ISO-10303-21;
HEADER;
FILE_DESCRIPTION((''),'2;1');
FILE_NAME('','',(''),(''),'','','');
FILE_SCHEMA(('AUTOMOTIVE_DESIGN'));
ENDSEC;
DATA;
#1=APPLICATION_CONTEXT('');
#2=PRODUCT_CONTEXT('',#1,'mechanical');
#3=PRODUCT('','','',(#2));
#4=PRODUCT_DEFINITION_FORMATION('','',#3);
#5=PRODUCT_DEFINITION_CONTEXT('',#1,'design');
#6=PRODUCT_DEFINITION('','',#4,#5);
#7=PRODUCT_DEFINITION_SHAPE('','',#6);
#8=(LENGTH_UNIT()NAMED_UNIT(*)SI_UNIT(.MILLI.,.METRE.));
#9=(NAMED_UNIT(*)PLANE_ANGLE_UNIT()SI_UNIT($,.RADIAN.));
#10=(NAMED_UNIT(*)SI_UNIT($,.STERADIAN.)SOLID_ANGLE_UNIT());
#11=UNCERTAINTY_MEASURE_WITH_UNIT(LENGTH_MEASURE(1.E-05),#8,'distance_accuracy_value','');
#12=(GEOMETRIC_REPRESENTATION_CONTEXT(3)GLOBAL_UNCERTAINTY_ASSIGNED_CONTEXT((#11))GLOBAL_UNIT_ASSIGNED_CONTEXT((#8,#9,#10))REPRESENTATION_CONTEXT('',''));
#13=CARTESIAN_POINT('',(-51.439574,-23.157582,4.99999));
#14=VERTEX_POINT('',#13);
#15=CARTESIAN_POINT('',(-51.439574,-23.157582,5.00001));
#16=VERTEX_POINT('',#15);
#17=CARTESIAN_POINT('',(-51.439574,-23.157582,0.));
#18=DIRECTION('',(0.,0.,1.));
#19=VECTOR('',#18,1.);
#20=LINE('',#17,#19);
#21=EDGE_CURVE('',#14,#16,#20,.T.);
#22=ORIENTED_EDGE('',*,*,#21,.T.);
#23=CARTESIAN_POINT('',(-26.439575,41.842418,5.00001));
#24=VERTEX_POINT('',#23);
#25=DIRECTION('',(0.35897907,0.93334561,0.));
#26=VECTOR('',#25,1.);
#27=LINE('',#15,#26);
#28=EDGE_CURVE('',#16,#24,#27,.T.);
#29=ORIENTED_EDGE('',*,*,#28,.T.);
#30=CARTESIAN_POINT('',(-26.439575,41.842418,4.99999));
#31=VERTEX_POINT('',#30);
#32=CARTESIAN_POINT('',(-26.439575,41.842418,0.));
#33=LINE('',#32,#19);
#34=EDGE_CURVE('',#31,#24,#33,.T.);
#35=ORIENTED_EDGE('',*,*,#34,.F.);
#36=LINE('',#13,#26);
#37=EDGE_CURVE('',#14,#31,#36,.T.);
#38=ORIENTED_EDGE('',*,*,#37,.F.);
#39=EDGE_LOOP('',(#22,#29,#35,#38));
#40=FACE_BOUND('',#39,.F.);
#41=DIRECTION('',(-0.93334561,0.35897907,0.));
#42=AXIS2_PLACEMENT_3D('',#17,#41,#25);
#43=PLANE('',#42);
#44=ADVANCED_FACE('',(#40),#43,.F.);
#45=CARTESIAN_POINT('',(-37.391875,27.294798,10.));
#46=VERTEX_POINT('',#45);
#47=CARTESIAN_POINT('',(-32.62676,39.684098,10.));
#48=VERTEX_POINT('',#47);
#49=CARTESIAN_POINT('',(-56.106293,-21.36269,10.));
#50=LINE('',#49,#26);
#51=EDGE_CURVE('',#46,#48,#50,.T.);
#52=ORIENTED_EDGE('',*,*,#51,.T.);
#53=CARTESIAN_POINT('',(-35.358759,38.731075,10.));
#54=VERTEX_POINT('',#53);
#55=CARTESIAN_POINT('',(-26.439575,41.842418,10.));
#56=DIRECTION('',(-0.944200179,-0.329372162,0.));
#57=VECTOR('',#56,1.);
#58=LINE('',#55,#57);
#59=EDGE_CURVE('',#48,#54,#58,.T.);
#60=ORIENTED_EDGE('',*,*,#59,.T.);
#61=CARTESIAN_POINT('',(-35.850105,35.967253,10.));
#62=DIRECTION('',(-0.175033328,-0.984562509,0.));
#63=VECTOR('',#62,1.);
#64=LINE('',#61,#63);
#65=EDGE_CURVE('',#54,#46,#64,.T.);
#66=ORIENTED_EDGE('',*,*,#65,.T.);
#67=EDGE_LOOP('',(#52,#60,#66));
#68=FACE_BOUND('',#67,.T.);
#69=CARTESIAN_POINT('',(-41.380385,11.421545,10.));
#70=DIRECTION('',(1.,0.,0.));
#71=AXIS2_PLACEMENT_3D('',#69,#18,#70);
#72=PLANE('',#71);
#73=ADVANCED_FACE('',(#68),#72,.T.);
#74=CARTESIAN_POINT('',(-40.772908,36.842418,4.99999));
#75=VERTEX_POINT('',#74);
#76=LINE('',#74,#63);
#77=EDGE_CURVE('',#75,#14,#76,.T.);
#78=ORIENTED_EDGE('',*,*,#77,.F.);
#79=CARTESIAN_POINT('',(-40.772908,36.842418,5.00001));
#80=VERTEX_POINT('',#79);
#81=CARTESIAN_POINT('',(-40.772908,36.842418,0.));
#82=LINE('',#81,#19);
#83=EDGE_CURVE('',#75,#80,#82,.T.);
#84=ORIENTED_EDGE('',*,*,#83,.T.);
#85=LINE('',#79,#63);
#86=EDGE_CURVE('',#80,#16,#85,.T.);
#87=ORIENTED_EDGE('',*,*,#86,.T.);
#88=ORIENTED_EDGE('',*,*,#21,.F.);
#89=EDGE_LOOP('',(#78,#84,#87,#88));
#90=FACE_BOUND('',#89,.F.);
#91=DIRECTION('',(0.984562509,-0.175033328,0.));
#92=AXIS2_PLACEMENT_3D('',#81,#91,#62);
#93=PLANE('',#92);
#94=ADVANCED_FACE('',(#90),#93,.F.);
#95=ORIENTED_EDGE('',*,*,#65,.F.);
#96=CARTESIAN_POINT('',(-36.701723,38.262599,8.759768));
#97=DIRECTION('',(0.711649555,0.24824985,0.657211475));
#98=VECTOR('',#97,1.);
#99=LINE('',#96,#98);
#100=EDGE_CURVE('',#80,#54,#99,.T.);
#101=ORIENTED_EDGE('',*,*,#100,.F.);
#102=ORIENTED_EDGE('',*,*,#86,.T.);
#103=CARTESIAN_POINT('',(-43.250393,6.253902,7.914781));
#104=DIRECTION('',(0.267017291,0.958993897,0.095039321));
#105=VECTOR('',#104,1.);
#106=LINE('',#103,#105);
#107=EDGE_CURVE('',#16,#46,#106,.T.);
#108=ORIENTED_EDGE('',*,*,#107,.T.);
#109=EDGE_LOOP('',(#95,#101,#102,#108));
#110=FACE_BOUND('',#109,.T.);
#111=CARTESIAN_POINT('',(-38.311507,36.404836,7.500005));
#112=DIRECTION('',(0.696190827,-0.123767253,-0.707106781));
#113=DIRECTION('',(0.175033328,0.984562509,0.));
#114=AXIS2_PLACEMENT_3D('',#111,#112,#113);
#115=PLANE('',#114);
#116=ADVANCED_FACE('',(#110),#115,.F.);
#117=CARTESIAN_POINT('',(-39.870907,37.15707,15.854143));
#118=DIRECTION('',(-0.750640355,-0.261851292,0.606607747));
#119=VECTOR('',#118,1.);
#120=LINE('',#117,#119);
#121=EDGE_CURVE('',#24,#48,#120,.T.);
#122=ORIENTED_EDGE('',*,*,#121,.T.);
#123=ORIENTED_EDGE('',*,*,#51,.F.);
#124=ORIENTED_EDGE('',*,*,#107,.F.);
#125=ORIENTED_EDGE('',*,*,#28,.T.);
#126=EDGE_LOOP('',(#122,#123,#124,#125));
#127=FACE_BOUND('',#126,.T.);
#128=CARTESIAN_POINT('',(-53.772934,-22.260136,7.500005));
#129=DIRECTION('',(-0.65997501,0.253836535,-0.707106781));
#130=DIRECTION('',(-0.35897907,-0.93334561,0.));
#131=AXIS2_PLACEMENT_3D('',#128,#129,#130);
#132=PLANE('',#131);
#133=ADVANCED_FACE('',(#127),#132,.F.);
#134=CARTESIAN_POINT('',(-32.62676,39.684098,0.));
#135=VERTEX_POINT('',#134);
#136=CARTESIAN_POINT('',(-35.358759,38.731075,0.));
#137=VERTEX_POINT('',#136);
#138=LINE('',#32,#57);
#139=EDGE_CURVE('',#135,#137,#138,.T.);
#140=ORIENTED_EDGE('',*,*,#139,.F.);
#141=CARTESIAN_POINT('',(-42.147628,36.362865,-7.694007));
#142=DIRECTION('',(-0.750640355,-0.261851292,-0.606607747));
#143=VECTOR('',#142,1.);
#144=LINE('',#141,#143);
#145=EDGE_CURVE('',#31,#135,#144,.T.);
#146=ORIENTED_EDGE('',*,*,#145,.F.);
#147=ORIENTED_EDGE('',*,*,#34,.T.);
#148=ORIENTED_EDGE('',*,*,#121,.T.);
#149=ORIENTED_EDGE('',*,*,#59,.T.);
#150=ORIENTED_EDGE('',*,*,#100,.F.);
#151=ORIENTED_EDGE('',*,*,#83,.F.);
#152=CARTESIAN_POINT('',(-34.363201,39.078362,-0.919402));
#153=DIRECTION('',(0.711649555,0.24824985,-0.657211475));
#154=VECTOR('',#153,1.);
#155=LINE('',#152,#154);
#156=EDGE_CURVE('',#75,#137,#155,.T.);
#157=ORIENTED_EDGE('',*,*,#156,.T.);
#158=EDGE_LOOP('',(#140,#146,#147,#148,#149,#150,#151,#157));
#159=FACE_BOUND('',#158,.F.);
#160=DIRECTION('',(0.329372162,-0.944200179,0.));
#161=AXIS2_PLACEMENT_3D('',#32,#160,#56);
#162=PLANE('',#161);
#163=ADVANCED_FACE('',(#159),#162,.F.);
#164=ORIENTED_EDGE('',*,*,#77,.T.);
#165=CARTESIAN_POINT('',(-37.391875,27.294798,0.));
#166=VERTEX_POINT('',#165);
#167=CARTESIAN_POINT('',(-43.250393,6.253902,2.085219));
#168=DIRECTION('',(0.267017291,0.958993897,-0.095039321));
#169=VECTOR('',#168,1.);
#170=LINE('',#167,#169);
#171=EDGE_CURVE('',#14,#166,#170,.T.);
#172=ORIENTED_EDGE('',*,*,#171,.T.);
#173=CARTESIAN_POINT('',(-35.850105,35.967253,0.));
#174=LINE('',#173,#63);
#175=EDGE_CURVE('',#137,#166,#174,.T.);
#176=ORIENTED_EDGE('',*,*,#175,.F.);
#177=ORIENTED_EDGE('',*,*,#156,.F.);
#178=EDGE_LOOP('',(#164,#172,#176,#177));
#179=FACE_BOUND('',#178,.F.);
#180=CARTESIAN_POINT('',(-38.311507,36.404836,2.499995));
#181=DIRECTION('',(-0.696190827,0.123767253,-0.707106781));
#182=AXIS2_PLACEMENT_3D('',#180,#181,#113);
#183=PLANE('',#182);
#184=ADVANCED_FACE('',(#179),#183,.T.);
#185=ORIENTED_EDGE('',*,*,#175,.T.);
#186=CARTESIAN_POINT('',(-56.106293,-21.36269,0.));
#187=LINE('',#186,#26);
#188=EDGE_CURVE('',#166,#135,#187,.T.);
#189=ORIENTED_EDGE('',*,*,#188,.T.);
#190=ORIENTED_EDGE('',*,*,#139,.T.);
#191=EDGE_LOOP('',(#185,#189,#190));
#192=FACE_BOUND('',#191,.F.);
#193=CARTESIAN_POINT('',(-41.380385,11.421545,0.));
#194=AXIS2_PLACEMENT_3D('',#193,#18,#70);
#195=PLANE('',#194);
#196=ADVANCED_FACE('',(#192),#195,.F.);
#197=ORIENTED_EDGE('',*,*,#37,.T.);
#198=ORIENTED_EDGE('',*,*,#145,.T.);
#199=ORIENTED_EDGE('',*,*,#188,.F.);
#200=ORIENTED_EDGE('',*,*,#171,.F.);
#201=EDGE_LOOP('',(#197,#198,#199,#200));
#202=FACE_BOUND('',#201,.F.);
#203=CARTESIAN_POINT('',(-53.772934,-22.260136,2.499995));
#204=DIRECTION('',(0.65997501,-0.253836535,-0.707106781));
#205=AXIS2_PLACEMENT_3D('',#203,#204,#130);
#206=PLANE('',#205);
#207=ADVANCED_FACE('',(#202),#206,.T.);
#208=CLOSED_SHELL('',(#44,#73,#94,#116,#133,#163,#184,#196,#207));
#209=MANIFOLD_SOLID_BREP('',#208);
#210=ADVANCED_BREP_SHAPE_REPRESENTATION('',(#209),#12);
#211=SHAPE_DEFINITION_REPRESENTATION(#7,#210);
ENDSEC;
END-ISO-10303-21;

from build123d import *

# Parameters (mm, degrees)
F1_DEPTH = 10
F2_SIZE  = 4.99999


# Not quite as in the source:
# - a fillet or chamfer is up to 0.001 mm smaller than in the source, because OpenCascade refuses the exact size


with BuildPart() as f1:
    # F0 (on Top) → F1 (new body)
    with BuildSketch(Plane.XY):
        Polygon((-26.4395750973, 41.8424181081), (-40.7729081464, 36.8424181081), (-51.4395743695, -23.1575818919), align=None)
    extrude(amount=F1_DEPTH)

    # F2 (size 5 in the source; OpenCascade refuses exactly that, so slightly less here)
    f2_edges = [f1.edges().sort_by_distance(p)[0] for p in [
        (-46.106241, 6.842418, 10),
        (-38.939575, 9.342418, 10),
        (-46.106241, 6.842418, 0),
        (-38.939575, 9.342418, 0),
    ]]
    chamfer(f2_edges, length=F2_SIZE)


solid = f1.part
